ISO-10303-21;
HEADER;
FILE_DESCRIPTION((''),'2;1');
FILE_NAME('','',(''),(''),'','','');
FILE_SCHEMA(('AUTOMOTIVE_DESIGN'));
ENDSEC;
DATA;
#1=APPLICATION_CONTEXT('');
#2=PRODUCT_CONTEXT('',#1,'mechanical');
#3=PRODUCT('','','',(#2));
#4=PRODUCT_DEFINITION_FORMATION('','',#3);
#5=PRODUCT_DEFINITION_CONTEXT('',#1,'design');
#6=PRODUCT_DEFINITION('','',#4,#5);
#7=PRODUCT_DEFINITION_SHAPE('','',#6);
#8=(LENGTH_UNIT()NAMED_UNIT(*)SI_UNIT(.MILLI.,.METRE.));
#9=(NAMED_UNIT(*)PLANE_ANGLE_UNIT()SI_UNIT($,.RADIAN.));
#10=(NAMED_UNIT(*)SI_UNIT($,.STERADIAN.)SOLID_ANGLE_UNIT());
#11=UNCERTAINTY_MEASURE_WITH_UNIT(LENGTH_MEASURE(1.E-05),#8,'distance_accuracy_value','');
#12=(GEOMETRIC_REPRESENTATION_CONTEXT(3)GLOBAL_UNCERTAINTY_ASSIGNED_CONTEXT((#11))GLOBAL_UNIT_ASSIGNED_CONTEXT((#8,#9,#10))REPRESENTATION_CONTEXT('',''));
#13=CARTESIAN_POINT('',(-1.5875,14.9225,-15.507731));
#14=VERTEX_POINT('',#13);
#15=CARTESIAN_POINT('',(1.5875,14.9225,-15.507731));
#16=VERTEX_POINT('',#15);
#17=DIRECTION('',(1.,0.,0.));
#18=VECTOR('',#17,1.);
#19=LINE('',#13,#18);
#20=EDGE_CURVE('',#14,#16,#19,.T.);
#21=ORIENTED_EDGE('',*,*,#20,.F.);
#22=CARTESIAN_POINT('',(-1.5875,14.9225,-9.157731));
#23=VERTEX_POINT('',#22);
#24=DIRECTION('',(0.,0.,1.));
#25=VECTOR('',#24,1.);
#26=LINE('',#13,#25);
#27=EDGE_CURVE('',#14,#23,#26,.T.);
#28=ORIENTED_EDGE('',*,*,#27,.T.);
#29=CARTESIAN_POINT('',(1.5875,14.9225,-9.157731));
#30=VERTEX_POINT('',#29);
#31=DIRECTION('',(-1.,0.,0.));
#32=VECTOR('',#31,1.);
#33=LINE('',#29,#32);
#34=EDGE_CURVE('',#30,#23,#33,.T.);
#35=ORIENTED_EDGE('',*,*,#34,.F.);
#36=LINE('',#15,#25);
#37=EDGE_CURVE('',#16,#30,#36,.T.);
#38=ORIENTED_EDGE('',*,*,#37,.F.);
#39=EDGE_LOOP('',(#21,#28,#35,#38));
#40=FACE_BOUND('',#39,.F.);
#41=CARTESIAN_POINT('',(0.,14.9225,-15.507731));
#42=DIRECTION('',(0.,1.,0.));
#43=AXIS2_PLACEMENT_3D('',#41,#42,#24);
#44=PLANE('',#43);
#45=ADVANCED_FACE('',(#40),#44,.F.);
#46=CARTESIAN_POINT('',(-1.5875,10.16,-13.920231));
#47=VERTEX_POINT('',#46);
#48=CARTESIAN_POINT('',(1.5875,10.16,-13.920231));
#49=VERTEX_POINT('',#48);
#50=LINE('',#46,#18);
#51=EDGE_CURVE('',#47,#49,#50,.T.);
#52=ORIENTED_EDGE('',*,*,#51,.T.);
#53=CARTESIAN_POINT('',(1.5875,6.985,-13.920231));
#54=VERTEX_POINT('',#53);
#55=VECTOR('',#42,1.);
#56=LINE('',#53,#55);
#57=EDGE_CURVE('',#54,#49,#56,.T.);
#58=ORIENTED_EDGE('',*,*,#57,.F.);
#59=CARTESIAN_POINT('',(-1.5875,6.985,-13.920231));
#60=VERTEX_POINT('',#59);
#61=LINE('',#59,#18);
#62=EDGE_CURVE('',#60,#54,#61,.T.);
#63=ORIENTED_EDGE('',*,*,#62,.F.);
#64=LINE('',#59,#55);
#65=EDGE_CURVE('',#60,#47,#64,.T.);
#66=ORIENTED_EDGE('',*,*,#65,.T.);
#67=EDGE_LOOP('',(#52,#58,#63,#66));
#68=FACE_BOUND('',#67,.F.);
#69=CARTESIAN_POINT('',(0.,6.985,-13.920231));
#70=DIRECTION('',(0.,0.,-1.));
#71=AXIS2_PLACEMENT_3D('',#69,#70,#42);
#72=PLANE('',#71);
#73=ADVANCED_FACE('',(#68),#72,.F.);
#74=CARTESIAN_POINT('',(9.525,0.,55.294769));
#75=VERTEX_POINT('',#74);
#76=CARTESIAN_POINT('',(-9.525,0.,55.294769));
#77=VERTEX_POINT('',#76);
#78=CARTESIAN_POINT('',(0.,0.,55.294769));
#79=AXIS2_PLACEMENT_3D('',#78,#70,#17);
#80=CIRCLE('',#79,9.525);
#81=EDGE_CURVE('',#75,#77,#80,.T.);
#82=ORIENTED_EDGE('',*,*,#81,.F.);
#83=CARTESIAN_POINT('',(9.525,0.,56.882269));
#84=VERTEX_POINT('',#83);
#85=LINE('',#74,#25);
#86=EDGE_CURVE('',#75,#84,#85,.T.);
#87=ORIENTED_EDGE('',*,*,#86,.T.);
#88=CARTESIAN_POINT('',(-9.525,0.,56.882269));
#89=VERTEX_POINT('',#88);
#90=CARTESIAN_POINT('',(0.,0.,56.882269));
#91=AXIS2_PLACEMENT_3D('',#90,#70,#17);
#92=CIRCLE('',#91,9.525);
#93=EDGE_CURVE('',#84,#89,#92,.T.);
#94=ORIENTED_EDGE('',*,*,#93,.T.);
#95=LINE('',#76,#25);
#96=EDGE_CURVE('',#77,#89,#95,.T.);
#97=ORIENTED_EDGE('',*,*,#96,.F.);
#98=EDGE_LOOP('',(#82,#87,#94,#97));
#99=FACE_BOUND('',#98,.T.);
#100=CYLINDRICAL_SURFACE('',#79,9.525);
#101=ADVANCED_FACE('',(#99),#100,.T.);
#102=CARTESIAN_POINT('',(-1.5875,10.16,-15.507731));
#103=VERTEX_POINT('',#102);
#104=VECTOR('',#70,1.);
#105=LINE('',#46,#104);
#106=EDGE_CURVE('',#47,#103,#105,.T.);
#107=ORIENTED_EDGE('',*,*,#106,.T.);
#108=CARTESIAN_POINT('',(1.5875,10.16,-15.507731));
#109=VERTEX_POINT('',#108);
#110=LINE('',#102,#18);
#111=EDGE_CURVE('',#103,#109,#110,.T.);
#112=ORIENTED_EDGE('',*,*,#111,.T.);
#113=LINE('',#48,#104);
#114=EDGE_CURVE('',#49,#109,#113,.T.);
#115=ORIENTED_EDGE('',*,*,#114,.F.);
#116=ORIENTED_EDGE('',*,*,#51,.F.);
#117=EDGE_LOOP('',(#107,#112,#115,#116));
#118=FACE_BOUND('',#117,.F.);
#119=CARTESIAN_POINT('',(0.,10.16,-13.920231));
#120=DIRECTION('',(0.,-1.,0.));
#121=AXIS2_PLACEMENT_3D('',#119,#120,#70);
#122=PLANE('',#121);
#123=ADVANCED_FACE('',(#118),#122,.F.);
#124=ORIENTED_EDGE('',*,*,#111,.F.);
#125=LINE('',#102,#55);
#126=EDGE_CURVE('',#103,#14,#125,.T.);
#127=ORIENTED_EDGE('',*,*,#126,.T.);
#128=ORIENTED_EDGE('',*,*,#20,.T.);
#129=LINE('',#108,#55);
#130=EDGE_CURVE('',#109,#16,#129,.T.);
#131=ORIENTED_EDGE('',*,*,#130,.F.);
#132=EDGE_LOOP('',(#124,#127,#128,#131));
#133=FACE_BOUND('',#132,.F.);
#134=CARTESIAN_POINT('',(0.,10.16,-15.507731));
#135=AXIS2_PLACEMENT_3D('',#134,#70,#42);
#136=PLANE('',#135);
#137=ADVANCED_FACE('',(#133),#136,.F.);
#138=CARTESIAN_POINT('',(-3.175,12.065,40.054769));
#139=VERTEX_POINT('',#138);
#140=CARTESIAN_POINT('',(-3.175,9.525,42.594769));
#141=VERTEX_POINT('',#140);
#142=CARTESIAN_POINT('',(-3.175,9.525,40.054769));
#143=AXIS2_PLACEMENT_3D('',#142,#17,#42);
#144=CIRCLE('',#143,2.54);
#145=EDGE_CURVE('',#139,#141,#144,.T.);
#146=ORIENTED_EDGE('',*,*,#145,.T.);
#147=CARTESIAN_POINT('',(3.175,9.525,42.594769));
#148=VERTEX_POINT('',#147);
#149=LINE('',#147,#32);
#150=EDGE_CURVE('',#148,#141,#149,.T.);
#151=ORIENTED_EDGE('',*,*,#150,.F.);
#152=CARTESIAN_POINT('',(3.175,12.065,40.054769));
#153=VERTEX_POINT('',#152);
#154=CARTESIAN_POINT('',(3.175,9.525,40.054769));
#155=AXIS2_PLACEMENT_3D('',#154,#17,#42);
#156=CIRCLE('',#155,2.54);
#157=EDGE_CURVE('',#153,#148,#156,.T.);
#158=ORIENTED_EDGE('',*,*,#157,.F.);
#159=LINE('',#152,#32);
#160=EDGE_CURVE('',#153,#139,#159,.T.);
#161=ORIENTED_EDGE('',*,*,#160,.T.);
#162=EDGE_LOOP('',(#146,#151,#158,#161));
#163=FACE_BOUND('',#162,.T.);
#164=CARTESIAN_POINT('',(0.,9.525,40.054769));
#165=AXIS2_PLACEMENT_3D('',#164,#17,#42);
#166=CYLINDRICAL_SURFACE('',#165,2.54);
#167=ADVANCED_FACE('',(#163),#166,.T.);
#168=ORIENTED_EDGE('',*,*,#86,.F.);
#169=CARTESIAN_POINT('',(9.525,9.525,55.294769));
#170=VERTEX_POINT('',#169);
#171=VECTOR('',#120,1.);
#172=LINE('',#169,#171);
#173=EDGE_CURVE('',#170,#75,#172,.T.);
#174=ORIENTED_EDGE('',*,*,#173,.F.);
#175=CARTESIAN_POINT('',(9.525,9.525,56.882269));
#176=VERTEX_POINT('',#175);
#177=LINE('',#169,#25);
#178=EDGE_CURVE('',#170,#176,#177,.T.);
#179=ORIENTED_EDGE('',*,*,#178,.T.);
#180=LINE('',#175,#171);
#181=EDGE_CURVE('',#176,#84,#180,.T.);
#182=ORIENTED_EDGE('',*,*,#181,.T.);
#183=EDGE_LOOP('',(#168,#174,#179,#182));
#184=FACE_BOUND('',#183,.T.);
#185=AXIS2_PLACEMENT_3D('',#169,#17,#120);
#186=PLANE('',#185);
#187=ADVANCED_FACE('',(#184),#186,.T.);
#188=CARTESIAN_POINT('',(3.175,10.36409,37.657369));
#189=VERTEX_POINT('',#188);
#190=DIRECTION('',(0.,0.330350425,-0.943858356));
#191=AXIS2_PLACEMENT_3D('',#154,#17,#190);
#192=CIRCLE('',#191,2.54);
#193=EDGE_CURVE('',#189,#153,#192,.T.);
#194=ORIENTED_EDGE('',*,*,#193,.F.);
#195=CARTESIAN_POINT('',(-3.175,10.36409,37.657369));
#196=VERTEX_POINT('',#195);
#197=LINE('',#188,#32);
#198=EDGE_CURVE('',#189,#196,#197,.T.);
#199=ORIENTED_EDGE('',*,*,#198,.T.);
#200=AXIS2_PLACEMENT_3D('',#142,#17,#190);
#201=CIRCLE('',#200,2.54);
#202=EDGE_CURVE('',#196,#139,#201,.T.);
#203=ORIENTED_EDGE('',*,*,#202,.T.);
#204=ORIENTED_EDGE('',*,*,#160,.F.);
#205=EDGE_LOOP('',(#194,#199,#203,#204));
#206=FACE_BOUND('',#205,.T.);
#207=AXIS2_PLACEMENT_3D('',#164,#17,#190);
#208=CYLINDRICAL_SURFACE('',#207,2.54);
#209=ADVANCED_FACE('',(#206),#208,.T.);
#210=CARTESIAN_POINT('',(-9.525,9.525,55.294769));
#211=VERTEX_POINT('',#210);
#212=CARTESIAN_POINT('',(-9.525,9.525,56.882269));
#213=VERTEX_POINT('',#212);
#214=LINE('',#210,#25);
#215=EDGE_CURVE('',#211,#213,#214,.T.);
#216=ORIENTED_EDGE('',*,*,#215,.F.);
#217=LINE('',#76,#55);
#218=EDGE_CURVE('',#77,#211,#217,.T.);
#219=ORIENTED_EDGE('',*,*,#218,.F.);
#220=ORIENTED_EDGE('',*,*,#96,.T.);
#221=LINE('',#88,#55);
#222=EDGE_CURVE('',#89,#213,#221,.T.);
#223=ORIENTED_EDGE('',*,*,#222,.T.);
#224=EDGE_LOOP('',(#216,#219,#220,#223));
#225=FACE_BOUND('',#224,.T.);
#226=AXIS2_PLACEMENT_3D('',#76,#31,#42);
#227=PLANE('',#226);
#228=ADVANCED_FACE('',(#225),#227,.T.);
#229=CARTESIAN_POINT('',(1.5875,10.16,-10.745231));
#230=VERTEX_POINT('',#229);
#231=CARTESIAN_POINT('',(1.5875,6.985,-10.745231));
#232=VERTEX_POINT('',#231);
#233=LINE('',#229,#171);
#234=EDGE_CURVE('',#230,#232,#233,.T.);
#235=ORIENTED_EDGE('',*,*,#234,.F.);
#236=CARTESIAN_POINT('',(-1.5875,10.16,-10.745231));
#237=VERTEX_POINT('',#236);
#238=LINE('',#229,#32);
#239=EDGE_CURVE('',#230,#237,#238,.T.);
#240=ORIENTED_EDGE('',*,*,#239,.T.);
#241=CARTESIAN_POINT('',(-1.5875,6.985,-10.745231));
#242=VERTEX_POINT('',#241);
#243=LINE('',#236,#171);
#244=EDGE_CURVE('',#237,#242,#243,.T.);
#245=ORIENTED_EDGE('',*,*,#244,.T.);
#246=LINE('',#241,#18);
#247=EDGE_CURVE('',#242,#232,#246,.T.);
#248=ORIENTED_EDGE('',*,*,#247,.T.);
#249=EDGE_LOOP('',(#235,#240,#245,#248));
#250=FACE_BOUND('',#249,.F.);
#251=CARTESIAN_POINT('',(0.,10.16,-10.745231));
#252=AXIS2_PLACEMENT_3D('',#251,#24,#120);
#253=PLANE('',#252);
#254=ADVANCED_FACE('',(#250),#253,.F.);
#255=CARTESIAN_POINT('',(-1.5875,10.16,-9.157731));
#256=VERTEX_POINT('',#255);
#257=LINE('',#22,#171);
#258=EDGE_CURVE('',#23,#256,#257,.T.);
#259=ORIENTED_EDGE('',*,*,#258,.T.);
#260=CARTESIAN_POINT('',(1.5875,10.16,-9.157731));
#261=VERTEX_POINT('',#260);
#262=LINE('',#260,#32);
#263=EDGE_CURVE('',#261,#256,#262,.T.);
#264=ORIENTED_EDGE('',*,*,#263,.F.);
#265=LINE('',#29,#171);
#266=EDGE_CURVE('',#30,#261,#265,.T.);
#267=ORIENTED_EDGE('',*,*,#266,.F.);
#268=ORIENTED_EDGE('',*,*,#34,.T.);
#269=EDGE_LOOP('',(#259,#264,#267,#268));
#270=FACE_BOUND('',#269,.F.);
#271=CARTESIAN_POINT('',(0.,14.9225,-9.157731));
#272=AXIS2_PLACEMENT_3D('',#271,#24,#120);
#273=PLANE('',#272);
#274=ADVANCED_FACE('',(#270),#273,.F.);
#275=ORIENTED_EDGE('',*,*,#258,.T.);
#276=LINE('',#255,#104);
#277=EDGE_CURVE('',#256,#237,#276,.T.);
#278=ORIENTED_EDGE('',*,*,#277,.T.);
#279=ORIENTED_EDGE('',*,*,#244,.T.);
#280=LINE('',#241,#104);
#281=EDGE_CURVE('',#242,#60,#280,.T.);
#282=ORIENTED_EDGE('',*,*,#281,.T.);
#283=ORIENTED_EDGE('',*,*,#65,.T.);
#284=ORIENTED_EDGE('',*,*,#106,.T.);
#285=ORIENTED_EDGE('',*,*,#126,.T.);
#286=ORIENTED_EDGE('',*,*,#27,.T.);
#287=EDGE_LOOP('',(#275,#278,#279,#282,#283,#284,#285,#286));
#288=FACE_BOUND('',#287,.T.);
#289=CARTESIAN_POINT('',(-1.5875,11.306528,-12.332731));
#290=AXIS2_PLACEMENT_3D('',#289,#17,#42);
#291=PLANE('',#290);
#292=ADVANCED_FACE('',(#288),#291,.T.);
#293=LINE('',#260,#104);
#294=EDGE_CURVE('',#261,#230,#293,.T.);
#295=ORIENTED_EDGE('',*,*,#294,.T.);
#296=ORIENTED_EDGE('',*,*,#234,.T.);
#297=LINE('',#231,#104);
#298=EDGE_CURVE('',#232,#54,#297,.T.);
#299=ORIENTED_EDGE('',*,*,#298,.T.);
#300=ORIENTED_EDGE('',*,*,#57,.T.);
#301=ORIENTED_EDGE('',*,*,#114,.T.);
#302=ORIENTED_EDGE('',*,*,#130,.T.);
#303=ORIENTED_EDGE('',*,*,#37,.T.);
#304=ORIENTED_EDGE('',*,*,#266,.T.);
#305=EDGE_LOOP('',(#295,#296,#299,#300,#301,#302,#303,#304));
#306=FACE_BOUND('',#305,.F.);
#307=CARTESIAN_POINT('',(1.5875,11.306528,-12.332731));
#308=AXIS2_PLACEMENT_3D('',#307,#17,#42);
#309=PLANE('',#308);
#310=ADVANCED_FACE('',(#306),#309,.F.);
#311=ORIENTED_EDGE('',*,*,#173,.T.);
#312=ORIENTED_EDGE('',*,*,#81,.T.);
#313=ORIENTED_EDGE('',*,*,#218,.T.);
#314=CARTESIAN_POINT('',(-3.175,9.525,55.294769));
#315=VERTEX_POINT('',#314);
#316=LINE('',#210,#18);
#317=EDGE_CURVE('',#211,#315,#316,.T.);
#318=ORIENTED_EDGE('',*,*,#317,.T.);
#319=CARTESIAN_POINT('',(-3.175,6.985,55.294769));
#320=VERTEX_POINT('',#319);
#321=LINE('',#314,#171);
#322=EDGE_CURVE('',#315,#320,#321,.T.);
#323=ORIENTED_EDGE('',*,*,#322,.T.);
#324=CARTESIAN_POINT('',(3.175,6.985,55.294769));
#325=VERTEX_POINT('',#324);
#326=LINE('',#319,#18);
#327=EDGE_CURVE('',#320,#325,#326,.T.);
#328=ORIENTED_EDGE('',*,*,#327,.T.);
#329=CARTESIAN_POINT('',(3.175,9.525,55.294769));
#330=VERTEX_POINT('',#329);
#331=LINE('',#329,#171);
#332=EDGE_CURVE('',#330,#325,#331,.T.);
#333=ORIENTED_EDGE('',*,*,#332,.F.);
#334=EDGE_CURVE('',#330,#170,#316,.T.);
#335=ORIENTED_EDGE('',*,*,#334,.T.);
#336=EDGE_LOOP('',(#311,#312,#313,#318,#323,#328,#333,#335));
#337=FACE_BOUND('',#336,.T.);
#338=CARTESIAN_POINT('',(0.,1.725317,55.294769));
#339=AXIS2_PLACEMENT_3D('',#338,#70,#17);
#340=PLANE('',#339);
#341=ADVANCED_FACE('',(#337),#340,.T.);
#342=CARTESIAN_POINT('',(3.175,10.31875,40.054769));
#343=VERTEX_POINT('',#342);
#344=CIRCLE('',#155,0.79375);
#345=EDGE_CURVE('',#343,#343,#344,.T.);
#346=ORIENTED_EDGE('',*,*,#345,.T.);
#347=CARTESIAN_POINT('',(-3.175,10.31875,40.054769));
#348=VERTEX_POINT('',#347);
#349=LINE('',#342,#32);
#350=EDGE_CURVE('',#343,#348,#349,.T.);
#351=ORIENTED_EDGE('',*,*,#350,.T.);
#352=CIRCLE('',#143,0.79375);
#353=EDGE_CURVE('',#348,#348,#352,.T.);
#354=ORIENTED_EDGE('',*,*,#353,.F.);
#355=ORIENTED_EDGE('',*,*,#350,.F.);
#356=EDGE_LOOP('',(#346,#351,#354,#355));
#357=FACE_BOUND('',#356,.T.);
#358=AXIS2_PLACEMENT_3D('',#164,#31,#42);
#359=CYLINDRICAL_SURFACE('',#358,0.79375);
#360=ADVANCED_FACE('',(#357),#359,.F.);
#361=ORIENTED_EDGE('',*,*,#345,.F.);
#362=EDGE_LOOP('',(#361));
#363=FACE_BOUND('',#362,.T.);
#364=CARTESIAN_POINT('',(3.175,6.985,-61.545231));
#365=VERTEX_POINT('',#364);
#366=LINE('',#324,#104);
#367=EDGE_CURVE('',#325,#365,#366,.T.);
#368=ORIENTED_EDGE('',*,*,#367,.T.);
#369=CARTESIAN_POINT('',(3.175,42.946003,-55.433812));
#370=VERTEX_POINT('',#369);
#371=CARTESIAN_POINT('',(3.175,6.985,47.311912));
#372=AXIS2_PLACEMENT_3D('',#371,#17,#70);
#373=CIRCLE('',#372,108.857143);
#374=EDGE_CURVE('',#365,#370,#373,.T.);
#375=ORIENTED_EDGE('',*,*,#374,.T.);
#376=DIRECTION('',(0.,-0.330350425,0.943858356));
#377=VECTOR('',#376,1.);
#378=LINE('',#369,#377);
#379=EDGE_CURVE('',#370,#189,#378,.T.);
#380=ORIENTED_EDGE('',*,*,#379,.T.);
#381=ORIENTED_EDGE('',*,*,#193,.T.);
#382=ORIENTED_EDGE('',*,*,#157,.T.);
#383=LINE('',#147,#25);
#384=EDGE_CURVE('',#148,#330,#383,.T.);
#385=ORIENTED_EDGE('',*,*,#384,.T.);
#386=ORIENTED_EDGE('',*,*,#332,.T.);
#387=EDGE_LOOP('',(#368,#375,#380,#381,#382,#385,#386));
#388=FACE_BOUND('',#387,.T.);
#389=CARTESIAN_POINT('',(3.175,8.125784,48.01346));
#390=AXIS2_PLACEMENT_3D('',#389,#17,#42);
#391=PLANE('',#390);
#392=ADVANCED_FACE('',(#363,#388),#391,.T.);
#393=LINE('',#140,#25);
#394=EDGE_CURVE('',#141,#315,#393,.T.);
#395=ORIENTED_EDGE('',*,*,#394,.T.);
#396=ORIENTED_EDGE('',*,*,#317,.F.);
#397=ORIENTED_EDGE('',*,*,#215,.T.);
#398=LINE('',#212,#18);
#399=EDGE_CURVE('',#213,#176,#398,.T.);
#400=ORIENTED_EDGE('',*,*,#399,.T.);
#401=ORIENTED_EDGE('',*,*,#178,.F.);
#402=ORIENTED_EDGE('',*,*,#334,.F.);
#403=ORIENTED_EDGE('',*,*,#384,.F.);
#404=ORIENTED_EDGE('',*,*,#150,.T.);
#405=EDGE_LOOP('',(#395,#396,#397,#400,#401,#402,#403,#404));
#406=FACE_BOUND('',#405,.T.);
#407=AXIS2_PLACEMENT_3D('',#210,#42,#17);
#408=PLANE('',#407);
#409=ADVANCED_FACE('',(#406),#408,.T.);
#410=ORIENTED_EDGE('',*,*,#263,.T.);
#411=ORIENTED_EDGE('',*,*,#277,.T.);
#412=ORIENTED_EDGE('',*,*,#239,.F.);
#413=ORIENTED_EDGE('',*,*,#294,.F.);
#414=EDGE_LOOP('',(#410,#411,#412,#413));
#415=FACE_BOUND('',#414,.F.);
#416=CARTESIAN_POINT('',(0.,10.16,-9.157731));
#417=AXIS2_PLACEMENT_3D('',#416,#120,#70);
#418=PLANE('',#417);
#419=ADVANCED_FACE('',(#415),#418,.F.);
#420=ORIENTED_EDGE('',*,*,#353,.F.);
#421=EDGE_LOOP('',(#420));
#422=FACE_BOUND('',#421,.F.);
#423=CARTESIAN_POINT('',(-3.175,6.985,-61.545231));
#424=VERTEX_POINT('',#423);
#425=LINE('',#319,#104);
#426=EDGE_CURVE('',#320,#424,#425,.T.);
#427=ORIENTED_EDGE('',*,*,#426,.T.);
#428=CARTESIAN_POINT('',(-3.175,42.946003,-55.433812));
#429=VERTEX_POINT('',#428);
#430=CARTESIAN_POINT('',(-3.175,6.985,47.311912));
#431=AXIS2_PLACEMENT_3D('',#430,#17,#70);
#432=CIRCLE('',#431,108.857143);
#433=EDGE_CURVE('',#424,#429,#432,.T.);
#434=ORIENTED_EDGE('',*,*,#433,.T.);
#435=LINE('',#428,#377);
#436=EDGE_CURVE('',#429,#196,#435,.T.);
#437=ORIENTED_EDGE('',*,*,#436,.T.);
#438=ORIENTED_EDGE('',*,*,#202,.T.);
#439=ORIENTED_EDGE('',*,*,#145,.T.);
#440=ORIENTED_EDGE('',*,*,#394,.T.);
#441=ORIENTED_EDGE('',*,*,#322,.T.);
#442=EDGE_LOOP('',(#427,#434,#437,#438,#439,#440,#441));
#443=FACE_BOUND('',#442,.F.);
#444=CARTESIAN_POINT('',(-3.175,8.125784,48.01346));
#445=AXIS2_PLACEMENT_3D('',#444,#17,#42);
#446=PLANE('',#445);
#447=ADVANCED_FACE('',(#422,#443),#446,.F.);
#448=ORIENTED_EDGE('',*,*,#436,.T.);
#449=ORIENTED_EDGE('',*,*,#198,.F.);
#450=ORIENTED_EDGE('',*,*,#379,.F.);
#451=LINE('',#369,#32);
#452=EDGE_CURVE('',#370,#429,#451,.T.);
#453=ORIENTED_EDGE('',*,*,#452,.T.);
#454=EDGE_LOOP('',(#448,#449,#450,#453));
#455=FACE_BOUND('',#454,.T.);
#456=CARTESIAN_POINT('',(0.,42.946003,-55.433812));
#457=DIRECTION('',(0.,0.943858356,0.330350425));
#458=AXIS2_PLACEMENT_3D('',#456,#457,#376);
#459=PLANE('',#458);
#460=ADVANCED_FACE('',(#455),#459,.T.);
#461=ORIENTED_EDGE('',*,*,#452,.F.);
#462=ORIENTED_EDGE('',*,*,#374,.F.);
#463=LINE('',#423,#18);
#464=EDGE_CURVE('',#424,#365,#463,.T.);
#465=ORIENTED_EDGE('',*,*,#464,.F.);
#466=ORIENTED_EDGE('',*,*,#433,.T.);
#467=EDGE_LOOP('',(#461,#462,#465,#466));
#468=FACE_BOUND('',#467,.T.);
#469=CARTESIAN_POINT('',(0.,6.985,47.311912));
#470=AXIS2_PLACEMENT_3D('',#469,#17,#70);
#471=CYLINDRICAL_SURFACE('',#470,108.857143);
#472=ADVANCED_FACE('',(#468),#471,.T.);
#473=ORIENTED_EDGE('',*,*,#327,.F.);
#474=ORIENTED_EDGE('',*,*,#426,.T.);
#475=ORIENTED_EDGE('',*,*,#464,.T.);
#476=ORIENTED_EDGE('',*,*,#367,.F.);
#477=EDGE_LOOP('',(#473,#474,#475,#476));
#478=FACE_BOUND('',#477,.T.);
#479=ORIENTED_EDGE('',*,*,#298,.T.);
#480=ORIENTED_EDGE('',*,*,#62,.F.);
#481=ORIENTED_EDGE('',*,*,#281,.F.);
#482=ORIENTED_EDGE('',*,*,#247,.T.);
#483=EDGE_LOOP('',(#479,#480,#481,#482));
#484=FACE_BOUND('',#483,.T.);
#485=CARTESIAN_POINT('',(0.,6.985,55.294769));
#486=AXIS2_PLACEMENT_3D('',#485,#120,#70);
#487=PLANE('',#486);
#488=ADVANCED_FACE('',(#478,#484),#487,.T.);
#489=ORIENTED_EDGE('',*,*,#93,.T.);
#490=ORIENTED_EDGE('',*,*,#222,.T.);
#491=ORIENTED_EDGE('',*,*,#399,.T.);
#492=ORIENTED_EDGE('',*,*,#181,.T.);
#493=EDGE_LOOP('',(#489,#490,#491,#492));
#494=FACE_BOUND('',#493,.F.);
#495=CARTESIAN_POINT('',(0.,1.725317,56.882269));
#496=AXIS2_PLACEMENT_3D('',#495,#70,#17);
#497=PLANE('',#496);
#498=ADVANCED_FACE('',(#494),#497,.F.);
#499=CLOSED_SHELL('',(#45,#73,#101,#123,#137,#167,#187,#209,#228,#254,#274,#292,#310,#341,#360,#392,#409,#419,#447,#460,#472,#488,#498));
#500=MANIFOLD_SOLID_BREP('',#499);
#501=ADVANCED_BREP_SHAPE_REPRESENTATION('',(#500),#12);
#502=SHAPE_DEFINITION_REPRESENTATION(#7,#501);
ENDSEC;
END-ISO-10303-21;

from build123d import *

# Parameters (mm, degrees)
F3_DEPTH = 1.5875
F4_R     = 0.79375
F5_DEPTH = 3.175
F6_DEPTH = 1.5875


# Not quite as in the source:
# - a length typed as a fraction of an inch, garbled in the dataset ("3 / 203.2 mm" for 3/8 in), is restored


with BuildPart() as f3:
    # F2 (on line) → F3 (new body)
    with BuildSketch(Plane(origin=(0, 0, 55.2947693627), x_dir=(1, 0, 0), z_dir=(0, 0, -1))):
        with BuildLine():
            ThreePointArc((9.525, 0), (0, 9.525), (-9.525, 0))
            Line((-9.525, 0), (-9.525, -9.525))
            Line((-9.525, -9.525), (9.525, -9.525))
            Line((9.525, -9.525), (9.525, 0))
        make_face()
    extrude(amount=-F3_DEPTH)

    # F4 (on Right) → F5 (join, symmetric)
    with BuildSketch(Plane.YZ):
        with BuildLine():
            Line((9.525, 42.5947693627), (9.525, 55.2947693627))
            Line((9.525, 55.2947693627), (6.985, 55.2947693627))
            Line((6.985, 55.2947693627), (6.985, 40.0547693627))
            ThreePointArc((6.985, 40.0547693627), (7.7289487758, 41.8508205869), (9.525, 42.5947693627))
        make_face()
        Polygon((10.16, -10.7452306373), (6.985, -10.7452306373), (6.985, -13.9202306373), (10.16, -13.9202306373), (10.16, -15.5077306373), (14.9225, -15.5077306373), (14.9225, -9.1577306373), (10.16, -9.1577306373), align=None)
        with BuildLine():
            ThreePointArc((10.3640900788, 37.6573691375), (8.0552532191, 37.9831891928), (6.985, 40.0547693627))
            Line((6.985, 40.0547693627), (6.985, -10.7452306373))
            Line((6.985, -10.7452306373), (10.16, -10.7452306373))
            Line((10.16, -10.7452306373), (10.16, -9.1577306373))
            Line((10.16, -9.1577306373), (14.9225, -9.1577306373))
            Line((14.9225, -9.1577306373), (14.9225, -15.5077306373))
            Line((14.9225, -15.5077306373), (10.16, -15.5077306373))
            Line((10.16, -15.5077306373), (10.16, -13.9202306373))
            Line((10.16, -13.9202306373), (6.985, -13.9202306373))
            Line((6.985, -13.9202306373), (6.985, -61.5452306373))
            ThreePointArc((6.985, -61.5452306373), (25.2233058777, -60.0065006912), (42.9460033775, -55.433811716))
            Line((42.9460033775, -55.433811716), (10.3640900788, 37.6573691375))
        make_face()
        with BuildLine():
            ThreePointArc((12.065, 40.0547693627), (11.3210512242, 41.8508205869), (9.525, 42.5947693627))
            ThreePointArc((9.525, 42.5947693627), (7.7289487758, 41.8508205869), (6.985, 40.0547693627))
            ThreePointArc((6.985, 40.0547693627), (8.0552532191, 37.9831891928), (10.3640900788, 37.6573691375))
            ThreePointArc((10.3640900788, 37.6573691375), (11.5965801698, 38.5850225818), (12.065, 40.0547693627))
        make_face()
        with Locations((9.525, 40.0547693627)):
            Circle(F4_R, mode=Mode.SUBTRACT)
    extrude(amount=F5_DEPTH, both=True)

    # F4 (on Right) → F6 (cut, symmetric)
    with BuildSketch(Plane.YZ):
        Polygon((10.16, -10.7452306373), (6.985, -10.7452306373), (6.985, -13.9202306373), (10.16, -13.9202306373), (10.16, -15.5077306373), (14.9225, -15.5077306373), (14.9225, -9.1577306373), (10.16, -9.1577306373), align=None)
    extrude(amount=F6_DEPTH, both=True, mode=Mode.SUBTRACT)


solid = f3.part
